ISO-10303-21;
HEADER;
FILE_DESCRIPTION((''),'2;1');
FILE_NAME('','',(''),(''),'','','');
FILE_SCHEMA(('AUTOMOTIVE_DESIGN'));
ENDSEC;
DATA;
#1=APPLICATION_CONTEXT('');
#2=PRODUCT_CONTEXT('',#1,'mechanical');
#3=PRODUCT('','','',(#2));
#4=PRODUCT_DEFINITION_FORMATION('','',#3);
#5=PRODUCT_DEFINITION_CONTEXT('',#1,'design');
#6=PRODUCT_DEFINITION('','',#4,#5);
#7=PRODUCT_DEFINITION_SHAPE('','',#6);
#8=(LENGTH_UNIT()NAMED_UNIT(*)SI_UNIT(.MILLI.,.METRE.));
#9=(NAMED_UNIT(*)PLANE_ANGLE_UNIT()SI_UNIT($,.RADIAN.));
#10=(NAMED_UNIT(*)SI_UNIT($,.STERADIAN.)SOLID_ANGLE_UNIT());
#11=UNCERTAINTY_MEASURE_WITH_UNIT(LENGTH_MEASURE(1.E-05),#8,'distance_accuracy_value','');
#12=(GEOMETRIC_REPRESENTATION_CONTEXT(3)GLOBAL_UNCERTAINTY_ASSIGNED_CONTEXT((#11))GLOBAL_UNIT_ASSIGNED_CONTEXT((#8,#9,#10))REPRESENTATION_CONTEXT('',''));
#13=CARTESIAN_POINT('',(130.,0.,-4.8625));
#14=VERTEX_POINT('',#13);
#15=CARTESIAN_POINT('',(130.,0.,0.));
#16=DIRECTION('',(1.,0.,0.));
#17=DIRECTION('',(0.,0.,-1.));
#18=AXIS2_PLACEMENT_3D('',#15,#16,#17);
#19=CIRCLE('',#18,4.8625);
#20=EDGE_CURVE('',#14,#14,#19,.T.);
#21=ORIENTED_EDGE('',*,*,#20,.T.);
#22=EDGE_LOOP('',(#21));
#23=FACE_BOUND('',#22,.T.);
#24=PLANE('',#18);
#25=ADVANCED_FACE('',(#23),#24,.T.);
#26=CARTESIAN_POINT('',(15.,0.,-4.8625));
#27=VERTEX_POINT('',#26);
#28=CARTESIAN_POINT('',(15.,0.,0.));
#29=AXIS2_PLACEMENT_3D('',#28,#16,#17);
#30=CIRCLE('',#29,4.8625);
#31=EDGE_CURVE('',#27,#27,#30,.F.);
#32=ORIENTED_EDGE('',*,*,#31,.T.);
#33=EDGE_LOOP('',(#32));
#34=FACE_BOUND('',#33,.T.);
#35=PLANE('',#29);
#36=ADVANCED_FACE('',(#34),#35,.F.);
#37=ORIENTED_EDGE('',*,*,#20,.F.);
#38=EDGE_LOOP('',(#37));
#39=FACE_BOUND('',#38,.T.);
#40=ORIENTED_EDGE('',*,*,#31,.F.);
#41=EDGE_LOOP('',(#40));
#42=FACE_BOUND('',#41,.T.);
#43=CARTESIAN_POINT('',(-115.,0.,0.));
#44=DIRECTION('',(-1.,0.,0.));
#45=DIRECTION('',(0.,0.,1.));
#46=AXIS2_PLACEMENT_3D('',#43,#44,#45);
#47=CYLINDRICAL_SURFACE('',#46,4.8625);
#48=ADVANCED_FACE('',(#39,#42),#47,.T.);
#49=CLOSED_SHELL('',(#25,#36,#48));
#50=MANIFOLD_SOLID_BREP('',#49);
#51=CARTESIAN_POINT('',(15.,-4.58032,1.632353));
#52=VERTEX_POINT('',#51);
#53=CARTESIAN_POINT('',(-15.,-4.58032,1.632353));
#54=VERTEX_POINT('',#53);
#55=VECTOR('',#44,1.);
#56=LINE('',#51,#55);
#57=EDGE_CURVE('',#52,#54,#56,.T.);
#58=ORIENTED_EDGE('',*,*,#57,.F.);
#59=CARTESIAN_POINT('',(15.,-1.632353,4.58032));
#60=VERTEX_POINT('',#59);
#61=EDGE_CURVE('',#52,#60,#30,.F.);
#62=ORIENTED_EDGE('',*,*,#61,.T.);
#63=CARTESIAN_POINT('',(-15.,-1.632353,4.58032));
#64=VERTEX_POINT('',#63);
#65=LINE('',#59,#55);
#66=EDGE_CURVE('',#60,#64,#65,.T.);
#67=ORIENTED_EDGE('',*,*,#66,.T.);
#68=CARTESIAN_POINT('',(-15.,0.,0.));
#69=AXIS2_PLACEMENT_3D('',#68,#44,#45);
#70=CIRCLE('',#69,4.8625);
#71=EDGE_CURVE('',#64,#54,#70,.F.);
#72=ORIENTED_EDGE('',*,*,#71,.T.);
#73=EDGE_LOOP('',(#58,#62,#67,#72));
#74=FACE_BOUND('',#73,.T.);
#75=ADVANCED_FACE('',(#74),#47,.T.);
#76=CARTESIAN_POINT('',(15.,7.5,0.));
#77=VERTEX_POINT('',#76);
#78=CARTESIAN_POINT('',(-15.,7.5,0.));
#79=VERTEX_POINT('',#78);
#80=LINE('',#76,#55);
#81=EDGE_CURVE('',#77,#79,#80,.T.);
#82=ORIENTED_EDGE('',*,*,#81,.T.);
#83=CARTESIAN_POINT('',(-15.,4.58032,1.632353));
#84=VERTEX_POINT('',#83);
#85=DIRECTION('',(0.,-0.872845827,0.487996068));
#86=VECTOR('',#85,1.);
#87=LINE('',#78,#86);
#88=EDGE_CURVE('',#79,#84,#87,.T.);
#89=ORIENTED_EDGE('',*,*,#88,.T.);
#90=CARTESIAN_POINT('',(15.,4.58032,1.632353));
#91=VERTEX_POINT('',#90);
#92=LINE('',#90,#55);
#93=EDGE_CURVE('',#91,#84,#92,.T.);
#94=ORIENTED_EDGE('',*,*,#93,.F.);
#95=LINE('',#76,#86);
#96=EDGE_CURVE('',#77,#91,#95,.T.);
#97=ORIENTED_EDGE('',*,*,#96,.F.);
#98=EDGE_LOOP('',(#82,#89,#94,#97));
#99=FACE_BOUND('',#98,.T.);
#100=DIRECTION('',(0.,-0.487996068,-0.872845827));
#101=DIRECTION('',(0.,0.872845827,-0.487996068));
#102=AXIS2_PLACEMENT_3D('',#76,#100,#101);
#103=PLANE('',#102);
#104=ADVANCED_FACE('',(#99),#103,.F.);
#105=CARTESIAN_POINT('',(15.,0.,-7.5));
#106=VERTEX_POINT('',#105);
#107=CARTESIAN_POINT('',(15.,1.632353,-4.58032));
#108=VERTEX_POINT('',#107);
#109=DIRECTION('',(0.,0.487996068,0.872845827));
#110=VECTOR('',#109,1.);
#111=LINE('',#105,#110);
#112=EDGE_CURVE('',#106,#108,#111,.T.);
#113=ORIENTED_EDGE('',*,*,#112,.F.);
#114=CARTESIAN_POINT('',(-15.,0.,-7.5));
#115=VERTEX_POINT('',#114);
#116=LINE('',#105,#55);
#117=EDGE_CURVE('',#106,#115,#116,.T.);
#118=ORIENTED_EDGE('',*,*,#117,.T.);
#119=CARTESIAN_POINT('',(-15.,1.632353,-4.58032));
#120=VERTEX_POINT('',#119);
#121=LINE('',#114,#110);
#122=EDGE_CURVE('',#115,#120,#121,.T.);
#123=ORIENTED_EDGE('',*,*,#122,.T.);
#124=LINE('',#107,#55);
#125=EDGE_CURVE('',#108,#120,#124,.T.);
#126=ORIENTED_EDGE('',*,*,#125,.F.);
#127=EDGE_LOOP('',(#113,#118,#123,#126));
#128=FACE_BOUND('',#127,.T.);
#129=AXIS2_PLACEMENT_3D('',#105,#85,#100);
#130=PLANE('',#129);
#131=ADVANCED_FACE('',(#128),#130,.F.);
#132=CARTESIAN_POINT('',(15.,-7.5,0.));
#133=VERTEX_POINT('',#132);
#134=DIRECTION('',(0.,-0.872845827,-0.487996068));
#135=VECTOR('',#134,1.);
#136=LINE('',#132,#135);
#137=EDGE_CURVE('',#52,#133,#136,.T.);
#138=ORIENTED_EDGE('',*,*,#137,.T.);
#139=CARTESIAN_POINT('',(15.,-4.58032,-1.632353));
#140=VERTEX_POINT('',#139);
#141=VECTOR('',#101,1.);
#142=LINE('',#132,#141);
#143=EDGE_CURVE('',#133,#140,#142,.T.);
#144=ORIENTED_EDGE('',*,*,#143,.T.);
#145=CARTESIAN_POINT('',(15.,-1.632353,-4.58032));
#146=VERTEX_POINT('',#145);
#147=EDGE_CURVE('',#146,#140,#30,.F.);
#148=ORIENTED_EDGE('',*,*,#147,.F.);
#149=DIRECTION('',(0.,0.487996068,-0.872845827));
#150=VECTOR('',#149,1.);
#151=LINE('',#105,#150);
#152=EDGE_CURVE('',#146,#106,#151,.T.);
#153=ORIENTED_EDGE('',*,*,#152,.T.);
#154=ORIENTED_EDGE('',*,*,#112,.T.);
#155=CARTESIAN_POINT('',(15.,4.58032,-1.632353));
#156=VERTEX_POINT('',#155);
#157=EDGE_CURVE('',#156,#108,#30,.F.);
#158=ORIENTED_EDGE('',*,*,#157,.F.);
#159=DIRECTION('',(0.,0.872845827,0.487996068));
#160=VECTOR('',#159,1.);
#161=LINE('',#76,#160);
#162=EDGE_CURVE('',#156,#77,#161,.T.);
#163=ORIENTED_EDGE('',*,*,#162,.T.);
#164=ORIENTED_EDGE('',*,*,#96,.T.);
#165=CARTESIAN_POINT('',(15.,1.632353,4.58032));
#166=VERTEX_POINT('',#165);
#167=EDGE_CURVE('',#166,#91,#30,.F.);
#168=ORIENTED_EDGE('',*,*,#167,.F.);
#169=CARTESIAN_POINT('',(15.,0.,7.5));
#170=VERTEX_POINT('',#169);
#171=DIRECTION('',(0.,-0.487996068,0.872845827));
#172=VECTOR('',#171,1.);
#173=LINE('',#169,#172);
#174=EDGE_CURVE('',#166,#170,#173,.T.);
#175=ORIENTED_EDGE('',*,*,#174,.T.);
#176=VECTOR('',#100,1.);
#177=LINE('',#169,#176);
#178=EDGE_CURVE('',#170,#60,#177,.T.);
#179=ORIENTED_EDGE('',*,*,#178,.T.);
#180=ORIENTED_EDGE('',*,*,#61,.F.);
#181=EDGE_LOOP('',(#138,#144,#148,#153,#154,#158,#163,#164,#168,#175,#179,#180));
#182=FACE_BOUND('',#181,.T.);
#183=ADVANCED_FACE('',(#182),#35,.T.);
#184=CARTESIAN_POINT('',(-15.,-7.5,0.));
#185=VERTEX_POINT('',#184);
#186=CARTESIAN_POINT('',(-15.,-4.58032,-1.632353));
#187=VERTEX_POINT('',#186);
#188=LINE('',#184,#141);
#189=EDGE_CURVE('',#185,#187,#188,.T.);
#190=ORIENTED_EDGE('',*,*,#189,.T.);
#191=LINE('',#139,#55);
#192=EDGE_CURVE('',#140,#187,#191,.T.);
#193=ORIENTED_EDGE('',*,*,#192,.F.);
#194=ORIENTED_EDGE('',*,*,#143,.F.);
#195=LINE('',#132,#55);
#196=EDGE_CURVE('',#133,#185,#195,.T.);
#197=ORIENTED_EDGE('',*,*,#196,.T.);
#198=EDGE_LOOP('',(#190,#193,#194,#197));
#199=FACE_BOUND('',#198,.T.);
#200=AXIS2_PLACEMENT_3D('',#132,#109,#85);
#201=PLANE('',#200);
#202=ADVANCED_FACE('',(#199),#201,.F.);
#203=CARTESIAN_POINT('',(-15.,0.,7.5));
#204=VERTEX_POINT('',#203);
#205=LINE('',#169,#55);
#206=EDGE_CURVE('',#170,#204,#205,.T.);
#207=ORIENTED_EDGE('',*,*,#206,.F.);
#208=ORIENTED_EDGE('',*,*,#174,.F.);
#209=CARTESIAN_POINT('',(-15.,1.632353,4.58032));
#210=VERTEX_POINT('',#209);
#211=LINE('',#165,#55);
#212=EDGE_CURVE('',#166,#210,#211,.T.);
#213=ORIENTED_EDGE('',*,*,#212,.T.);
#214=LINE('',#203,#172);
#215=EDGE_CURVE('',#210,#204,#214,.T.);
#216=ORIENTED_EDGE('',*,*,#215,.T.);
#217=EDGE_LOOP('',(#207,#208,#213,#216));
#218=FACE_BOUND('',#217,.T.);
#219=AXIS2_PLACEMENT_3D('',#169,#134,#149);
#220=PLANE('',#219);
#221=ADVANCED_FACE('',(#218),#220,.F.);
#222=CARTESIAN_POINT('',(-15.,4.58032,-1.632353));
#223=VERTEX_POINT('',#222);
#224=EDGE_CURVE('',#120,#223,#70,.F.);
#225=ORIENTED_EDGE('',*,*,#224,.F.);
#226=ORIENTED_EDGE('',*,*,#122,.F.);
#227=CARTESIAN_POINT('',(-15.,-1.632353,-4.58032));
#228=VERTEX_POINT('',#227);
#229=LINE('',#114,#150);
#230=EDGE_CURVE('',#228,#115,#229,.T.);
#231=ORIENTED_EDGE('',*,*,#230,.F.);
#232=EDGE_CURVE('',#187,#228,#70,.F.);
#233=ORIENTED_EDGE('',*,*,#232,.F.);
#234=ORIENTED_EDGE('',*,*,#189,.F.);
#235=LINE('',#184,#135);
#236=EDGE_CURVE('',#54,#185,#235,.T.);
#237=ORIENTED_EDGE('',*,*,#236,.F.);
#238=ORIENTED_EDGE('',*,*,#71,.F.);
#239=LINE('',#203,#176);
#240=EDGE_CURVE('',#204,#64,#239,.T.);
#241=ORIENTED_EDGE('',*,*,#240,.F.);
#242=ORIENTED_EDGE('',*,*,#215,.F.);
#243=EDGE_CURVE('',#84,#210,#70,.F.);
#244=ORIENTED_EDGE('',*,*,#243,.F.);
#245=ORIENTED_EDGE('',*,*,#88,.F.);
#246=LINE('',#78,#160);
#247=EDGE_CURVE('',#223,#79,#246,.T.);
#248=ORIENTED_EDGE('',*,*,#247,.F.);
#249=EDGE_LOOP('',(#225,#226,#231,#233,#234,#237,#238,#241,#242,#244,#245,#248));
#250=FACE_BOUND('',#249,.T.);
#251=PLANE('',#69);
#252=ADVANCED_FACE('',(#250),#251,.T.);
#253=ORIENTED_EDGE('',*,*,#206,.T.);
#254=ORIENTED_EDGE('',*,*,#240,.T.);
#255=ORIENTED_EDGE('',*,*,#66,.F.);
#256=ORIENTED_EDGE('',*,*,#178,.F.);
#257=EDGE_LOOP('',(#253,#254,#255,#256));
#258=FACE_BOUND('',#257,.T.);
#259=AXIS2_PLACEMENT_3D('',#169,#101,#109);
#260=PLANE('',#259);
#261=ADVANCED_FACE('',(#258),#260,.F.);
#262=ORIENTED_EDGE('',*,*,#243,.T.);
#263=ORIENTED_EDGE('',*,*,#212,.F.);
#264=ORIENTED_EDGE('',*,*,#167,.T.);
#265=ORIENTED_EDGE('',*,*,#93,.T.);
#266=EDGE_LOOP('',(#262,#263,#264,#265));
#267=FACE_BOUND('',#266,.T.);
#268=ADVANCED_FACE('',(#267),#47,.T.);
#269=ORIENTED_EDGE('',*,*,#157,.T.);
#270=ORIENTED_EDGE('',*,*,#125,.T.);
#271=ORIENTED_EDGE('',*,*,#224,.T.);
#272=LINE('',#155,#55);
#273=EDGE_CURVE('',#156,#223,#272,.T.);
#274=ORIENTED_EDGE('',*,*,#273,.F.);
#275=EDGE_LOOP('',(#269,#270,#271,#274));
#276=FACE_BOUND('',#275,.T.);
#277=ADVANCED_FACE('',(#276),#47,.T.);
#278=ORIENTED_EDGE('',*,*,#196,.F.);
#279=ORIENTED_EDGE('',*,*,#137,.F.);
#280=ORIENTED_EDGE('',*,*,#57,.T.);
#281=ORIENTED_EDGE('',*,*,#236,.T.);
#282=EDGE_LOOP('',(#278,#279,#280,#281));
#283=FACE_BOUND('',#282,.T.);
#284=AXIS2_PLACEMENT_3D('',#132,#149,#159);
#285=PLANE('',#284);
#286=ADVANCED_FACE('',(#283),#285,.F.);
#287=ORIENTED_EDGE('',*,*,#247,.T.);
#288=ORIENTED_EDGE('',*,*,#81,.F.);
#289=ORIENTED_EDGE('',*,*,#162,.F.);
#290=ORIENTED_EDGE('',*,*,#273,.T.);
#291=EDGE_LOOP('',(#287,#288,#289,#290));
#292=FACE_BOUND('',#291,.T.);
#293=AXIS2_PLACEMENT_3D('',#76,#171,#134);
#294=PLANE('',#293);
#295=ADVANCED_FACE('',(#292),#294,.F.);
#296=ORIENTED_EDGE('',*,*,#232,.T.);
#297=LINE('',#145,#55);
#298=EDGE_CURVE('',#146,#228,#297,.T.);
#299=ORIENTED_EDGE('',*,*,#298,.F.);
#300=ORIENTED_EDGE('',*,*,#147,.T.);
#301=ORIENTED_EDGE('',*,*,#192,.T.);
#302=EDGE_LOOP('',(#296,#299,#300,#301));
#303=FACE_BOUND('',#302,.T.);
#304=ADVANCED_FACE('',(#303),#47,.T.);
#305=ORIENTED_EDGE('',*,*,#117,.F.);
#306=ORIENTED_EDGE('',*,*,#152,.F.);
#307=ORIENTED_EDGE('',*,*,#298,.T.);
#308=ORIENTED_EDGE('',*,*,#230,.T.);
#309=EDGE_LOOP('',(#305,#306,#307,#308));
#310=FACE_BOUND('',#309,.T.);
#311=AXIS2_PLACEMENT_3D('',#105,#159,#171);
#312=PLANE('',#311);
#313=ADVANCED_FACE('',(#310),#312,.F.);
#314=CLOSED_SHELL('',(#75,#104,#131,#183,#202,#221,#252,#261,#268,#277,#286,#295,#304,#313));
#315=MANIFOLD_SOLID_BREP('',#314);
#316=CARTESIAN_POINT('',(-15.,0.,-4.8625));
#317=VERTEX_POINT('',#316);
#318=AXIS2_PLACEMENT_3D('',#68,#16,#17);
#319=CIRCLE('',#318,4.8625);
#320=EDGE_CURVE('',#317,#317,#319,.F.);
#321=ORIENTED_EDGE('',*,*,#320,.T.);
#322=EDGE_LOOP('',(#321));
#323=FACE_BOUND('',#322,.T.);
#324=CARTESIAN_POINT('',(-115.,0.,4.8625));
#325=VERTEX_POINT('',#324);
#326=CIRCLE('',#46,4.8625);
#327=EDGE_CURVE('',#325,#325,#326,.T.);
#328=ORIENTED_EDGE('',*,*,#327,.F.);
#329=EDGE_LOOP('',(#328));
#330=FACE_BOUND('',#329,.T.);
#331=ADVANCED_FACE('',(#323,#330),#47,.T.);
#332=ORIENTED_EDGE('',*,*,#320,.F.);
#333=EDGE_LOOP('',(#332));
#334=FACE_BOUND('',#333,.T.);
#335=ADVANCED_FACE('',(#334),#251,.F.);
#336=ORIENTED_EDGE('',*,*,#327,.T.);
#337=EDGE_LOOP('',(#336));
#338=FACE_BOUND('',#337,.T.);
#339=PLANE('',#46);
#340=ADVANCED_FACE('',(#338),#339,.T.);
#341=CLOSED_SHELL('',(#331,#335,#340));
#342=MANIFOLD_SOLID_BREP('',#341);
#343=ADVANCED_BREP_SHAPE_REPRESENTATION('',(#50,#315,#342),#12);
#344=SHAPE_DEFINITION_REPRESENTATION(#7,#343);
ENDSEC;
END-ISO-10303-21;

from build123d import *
from build123d.topology import SkipClean

# Parameters (mm, degrees)
SKETCH1_W           = 230
SKETCH1_H           = 4.8625
BOSS_EXTRUDE1_DEPTH = 15
SPLIT1_START        = -115
SPLIT1_OUTLINE_R    = 4.8625
SPLIT1_DEPTH        = 100
SPLIT1_START_2      = 15
SPLIT1_2_OUTLINE_R  = 4.8625
SPLIT1_2_DEPTH      = 100
SPLIT1_3_OUTLINE_R  = 4.8625
SPLIT1_3_DEPTH      = 100
SPLIT1_4_OUTLINE_R  = 4.8625
SPLIT1_4_DEPTH      = 100
BOSS_EXTRUDE2_START = 15
SKETCH3_R           = 4.8625
BOSS_EXTRUDE2_DEPTH = 15


# Read off the part's stored shape, not the designer's step: Split1
with BuildPart() as part:
    # Sketch1 → Revolve2 (revolve)
    with BuildSketch(Plane(origin=(0, 0, 0), x_dir=(1, 0, 0), z_dir=(0, 1, 0))):
        with Locations((0, -2.43125)):
            Rectangle(SKETCH1_W, SKETCH1_H)
    revolve(axis=Axis((-115, 0, 0), (1, 0, 0)))

    # Sketch2 → Boss-Extrude1 (add, symmetric)
    with SkipClean():  # the faces are left unmerged after this step: merging them gives an invalid solid
        with BuildSketch(Plane(origin=(0, 0, 0), x_dir=(0, 0, -1), z_dir=(1, 0, 0))):
            with BuildLine():
                Line((0, 7.5), (-1.6323529, 4.580319886))
                ThreePointArc((-1.6323529, 4.580319886), (-3.438306724, 3.438306724), (-4.580319886, 1.6323529))
                Line((-4.580319886, 1.6323529), (-7.5, 0))
                Line((-7.5, 0), (-4.580319886, -1.6323529))
                ThreePointArc((-4.580319886, -1.6323529), (-3.438306724, -3.438306724), (-1.6323529, -4.580319886))
                Line((-1.6323529, -4.580319886), (0, -7.5))
                Line((0, -7.5), (1.6323529, -4.580319886))
                ThreePointArc((1.6323529, -4.580319886), (3.438306724, -3.438306724), (4.580319886, -1.6323529))
                Line((4.580319886, -1.6323529), (7.5, 0))
                Line((7.5, 0), (4.580319886, 1.6323529))
                ThreePointArc((4.580319886, 1.6323529), (3.438306724, 3.438306724), (1.6323529, 4.580319886))
                Line((1.6323529, 4.580319886), (0, 7.5))
            make_face()
        extrude(amount=BOSS_EXTRUDE1_DEPTH, both=True)

    # Split1 outline → Split1 (cut)
    with SkipClean():  # the faces are left unmerged after this step: merging them gives an invalid solid
        with BuildSketch(Plane.YZ.offset(SPLIT1_START)):
            Circle(SPLIT1_OUTLINE_R)
        extrude(amount=SPLIT1_DEPTH, mode=Mode.SUBTRACT)

    # Split1 2 outline → Split1 2 (cut)
    with BuildSketch(Plane.YZ.offset(SPLIT1_START_2)):
        Circle(SPLIT1_2_OUTLINE_R)
    extrude(amount=SPLIT1_2_DEPTH, mode=Mode.SUBTRACT)


with BuildPart() as body_2:
    # Split1 3 outline → Split1 3 (new body)
    with BuildSketch(Plane.YZ.offset(SPLIT1_START_2)):
        Circle(SPLIT1_3_OUTLINE_R)
    extrude(amount=SPLIT1_3_DEPTH)

    # Sketch3 → Boss-Extrude2 (add)
    with BuildSketch(Plane(origin=(115, 0, 0), x_dir=(0, 0, -1), z_dir=(1, 0, 0)).offset(BOSS_EXTRUDE2_START)):
        Circle(SKETCH3_R)
    extrude(amount=-BOSS_EXTRUDE2_DEPTH)


with BuildPart() as body_3:
    # Split1 4 outline → Split1 4 (new body)
    with BuildSketch(Plane.YZ.offset(SPLIT1_START)):
        Circle(SPLIT1_4_OUTLINE_R)
    extrude(amount=SPLIT1_4_DEPTH)


solid = Compound([part.part, body_2.part, body_3.part])
